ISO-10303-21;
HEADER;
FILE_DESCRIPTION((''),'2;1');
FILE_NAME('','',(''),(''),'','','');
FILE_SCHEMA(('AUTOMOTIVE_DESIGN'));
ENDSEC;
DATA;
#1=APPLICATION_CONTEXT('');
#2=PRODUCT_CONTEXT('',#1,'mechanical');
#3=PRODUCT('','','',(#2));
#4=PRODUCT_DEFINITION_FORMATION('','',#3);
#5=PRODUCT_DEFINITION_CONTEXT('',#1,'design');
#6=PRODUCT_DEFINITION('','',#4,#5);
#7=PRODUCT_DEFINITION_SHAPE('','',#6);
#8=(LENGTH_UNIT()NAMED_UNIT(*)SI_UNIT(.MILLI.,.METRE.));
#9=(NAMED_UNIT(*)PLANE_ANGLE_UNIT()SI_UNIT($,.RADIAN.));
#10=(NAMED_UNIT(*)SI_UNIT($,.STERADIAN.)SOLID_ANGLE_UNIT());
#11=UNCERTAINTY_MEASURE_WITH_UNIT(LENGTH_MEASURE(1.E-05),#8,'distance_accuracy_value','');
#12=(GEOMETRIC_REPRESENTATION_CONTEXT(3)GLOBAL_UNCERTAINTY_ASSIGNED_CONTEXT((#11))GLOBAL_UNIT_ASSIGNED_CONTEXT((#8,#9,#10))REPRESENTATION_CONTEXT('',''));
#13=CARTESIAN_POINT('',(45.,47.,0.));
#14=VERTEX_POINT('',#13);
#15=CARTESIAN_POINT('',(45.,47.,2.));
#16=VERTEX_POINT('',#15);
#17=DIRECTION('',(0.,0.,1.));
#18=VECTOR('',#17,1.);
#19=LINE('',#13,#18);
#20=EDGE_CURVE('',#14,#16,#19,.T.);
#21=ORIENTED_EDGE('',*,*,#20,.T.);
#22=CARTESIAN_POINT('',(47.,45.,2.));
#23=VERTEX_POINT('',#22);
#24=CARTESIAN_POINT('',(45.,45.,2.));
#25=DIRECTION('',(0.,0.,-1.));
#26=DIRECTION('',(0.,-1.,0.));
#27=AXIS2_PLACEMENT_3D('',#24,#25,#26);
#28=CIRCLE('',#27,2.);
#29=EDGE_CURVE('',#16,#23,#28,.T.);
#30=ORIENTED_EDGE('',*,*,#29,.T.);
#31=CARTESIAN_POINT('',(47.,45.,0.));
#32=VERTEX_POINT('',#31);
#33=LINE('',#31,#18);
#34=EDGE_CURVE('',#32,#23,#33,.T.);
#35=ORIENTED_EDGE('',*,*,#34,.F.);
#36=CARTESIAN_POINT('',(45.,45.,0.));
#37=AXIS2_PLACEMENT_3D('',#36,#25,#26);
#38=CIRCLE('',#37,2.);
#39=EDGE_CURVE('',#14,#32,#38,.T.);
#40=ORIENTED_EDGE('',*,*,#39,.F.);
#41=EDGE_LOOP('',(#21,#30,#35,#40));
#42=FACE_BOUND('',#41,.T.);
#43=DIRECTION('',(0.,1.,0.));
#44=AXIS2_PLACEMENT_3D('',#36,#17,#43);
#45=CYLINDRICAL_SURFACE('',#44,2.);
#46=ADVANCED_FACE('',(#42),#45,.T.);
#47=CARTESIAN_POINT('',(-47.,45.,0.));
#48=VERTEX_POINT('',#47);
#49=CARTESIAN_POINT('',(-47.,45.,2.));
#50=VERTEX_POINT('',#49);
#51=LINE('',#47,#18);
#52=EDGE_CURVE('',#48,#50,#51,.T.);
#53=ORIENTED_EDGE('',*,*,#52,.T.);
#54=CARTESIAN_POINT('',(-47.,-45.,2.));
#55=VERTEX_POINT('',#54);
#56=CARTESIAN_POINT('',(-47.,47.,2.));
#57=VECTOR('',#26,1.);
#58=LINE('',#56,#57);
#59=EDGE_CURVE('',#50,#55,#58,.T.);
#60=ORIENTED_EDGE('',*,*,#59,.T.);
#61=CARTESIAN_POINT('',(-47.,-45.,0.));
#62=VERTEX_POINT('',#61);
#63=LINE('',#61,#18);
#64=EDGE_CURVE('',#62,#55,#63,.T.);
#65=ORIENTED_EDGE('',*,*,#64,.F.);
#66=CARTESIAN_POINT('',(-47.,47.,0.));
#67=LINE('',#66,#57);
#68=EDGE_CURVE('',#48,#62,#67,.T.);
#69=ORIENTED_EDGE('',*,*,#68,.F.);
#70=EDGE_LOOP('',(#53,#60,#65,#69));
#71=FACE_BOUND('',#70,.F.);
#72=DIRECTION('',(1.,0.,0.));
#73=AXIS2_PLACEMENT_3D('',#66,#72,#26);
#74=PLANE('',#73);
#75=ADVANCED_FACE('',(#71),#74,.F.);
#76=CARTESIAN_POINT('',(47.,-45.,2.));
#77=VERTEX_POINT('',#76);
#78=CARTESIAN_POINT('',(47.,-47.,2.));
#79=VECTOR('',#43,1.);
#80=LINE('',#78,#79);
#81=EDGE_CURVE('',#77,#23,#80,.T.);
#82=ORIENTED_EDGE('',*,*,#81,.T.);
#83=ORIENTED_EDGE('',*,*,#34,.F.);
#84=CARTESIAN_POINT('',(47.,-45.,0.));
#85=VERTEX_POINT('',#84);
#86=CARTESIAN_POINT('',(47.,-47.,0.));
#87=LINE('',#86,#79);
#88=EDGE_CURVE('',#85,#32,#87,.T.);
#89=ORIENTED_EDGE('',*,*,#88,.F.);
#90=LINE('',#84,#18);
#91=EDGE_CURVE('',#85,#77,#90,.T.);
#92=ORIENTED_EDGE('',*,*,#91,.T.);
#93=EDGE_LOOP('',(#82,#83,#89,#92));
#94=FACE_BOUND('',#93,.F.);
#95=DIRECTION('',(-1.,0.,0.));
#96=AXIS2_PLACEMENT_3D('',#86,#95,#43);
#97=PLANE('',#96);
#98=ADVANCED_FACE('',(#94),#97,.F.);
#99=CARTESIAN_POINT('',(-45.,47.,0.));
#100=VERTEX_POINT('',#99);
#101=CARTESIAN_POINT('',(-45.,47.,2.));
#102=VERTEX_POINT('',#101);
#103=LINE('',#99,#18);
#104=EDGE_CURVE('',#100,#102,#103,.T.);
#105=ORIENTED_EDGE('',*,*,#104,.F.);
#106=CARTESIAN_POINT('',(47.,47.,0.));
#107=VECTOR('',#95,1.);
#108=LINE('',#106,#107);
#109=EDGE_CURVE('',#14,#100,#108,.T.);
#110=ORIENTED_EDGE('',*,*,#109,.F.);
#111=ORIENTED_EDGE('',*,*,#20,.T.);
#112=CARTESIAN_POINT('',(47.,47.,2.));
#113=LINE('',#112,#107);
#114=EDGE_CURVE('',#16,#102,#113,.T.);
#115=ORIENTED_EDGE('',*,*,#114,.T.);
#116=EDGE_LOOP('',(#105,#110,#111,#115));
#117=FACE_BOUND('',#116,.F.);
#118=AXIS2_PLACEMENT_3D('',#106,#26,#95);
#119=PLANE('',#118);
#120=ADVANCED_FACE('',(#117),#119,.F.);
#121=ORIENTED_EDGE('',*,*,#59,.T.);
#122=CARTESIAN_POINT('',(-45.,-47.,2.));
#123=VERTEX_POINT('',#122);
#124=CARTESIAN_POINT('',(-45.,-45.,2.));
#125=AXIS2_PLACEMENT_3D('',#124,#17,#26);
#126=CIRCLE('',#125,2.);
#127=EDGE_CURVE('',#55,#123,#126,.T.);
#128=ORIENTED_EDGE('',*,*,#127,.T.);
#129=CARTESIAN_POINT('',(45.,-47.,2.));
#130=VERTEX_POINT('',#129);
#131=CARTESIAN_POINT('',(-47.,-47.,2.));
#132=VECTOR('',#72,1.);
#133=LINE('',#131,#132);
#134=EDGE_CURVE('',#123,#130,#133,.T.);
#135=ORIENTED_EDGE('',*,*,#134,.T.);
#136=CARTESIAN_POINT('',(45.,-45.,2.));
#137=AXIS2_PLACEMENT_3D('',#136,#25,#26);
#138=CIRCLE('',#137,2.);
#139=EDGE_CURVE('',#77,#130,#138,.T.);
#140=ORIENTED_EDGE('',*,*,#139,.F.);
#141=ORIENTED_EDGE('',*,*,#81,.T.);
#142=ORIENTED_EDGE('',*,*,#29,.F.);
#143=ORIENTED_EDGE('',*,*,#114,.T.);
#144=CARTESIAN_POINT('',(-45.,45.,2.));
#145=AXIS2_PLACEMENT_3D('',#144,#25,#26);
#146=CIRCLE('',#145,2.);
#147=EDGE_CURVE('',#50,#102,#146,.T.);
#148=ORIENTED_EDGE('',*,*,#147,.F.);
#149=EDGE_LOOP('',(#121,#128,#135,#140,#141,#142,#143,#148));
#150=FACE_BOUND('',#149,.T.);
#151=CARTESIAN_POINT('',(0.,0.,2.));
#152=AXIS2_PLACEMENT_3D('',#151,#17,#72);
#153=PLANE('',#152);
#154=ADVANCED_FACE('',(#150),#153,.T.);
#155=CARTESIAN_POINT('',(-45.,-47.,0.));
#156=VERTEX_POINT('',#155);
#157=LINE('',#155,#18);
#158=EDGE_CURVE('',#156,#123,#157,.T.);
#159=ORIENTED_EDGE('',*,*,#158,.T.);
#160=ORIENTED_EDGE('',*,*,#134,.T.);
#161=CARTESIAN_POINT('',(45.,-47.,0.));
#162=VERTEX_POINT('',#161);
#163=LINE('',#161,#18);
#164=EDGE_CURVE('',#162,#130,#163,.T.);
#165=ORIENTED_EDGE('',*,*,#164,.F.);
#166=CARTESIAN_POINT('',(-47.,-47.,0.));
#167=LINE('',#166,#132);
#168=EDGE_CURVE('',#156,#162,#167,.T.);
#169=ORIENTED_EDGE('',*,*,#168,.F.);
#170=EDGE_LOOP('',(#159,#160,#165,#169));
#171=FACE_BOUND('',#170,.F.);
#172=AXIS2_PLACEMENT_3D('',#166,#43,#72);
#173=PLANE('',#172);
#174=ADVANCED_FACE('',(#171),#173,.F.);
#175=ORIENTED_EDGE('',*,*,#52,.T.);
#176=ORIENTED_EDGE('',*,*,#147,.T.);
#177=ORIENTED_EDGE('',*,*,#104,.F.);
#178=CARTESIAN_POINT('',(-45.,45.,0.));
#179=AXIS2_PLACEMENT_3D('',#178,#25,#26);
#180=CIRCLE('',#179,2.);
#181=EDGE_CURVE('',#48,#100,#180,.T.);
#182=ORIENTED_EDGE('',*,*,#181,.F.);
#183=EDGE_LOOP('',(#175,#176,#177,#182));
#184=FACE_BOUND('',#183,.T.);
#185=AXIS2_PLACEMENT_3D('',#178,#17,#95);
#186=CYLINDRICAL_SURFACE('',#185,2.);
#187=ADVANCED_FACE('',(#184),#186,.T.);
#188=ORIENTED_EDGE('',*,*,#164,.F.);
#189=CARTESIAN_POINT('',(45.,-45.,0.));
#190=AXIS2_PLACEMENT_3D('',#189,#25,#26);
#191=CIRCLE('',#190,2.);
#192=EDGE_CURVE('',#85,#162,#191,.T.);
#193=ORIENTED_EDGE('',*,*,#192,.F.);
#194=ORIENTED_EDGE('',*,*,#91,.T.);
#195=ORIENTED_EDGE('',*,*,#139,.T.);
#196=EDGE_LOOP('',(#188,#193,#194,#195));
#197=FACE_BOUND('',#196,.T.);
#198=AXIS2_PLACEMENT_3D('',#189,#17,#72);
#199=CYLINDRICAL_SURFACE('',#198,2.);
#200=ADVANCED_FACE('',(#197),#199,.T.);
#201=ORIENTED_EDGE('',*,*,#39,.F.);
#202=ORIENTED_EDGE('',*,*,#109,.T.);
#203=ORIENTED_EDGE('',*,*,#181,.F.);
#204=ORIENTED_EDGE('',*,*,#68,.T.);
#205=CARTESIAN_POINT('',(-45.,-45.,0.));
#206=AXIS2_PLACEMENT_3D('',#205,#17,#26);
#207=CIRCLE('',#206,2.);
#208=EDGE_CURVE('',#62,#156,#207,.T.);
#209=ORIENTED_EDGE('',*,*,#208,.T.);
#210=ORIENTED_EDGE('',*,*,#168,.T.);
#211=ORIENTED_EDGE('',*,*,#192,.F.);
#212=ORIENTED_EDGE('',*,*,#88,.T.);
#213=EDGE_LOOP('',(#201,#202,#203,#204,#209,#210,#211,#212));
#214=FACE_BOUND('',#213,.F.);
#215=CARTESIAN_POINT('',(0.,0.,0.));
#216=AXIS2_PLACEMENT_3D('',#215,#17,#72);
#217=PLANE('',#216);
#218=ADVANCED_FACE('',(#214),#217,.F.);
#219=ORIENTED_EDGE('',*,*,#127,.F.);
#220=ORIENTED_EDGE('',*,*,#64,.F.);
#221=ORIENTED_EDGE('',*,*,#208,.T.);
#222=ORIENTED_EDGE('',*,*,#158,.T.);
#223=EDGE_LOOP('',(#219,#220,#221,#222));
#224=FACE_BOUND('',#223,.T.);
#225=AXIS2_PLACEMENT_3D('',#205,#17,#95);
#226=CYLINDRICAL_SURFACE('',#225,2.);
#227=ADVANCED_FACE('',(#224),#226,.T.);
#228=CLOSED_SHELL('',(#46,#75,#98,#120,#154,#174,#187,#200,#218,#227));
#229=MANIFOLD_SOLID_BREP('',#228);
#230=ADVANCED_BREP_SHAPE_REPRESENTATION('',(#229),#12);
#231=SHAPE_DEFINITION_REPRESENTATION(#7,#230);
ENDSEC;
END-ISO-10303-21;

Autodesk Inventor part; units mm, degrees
ref_plane "YZ Plane" through (0, 0, 0) normal (1, 0, 0) x (0, 1, 0)
ref_plane "XZ Plane" through (0, 0, 0) normal (0, 1, 0) x (-1, 0, 0)
ref_plane "XY Plane" through (0, 0, 0) normal (0, 0, 1) x (1, 0, 0)
sketch "Sketch1" plane through (0, 0, 0) normal (0, 0, 1) x (1, 0, 0)
  line L0 (-47, -47) -> (47, -47)
  line L1 (47, -47) -> (47, 47)
  line L2 (47, 47) -> (-47, 47)
  line L3 (-47, 47) -> (-47, -47)
  line L4 (-47, -47) -> (47, 47) construction
  line L5 (47, -47) -> (-47, 47) construction
  point P0 (0, 0)
  dimension "d154" = 94
  dimension "d155" = 94
extrude "Plate5" add sketch "Sketch1" along normal blind 2
fillet "Corner Round1" radius 2 4 edges at (47, 47, 1) (-47, 47, 1) (-47, -47, 1) (47, -47, 1)
properties part number "PNS 765 FDS 1200 CUP 1_1600" material "Stainless Steel"
